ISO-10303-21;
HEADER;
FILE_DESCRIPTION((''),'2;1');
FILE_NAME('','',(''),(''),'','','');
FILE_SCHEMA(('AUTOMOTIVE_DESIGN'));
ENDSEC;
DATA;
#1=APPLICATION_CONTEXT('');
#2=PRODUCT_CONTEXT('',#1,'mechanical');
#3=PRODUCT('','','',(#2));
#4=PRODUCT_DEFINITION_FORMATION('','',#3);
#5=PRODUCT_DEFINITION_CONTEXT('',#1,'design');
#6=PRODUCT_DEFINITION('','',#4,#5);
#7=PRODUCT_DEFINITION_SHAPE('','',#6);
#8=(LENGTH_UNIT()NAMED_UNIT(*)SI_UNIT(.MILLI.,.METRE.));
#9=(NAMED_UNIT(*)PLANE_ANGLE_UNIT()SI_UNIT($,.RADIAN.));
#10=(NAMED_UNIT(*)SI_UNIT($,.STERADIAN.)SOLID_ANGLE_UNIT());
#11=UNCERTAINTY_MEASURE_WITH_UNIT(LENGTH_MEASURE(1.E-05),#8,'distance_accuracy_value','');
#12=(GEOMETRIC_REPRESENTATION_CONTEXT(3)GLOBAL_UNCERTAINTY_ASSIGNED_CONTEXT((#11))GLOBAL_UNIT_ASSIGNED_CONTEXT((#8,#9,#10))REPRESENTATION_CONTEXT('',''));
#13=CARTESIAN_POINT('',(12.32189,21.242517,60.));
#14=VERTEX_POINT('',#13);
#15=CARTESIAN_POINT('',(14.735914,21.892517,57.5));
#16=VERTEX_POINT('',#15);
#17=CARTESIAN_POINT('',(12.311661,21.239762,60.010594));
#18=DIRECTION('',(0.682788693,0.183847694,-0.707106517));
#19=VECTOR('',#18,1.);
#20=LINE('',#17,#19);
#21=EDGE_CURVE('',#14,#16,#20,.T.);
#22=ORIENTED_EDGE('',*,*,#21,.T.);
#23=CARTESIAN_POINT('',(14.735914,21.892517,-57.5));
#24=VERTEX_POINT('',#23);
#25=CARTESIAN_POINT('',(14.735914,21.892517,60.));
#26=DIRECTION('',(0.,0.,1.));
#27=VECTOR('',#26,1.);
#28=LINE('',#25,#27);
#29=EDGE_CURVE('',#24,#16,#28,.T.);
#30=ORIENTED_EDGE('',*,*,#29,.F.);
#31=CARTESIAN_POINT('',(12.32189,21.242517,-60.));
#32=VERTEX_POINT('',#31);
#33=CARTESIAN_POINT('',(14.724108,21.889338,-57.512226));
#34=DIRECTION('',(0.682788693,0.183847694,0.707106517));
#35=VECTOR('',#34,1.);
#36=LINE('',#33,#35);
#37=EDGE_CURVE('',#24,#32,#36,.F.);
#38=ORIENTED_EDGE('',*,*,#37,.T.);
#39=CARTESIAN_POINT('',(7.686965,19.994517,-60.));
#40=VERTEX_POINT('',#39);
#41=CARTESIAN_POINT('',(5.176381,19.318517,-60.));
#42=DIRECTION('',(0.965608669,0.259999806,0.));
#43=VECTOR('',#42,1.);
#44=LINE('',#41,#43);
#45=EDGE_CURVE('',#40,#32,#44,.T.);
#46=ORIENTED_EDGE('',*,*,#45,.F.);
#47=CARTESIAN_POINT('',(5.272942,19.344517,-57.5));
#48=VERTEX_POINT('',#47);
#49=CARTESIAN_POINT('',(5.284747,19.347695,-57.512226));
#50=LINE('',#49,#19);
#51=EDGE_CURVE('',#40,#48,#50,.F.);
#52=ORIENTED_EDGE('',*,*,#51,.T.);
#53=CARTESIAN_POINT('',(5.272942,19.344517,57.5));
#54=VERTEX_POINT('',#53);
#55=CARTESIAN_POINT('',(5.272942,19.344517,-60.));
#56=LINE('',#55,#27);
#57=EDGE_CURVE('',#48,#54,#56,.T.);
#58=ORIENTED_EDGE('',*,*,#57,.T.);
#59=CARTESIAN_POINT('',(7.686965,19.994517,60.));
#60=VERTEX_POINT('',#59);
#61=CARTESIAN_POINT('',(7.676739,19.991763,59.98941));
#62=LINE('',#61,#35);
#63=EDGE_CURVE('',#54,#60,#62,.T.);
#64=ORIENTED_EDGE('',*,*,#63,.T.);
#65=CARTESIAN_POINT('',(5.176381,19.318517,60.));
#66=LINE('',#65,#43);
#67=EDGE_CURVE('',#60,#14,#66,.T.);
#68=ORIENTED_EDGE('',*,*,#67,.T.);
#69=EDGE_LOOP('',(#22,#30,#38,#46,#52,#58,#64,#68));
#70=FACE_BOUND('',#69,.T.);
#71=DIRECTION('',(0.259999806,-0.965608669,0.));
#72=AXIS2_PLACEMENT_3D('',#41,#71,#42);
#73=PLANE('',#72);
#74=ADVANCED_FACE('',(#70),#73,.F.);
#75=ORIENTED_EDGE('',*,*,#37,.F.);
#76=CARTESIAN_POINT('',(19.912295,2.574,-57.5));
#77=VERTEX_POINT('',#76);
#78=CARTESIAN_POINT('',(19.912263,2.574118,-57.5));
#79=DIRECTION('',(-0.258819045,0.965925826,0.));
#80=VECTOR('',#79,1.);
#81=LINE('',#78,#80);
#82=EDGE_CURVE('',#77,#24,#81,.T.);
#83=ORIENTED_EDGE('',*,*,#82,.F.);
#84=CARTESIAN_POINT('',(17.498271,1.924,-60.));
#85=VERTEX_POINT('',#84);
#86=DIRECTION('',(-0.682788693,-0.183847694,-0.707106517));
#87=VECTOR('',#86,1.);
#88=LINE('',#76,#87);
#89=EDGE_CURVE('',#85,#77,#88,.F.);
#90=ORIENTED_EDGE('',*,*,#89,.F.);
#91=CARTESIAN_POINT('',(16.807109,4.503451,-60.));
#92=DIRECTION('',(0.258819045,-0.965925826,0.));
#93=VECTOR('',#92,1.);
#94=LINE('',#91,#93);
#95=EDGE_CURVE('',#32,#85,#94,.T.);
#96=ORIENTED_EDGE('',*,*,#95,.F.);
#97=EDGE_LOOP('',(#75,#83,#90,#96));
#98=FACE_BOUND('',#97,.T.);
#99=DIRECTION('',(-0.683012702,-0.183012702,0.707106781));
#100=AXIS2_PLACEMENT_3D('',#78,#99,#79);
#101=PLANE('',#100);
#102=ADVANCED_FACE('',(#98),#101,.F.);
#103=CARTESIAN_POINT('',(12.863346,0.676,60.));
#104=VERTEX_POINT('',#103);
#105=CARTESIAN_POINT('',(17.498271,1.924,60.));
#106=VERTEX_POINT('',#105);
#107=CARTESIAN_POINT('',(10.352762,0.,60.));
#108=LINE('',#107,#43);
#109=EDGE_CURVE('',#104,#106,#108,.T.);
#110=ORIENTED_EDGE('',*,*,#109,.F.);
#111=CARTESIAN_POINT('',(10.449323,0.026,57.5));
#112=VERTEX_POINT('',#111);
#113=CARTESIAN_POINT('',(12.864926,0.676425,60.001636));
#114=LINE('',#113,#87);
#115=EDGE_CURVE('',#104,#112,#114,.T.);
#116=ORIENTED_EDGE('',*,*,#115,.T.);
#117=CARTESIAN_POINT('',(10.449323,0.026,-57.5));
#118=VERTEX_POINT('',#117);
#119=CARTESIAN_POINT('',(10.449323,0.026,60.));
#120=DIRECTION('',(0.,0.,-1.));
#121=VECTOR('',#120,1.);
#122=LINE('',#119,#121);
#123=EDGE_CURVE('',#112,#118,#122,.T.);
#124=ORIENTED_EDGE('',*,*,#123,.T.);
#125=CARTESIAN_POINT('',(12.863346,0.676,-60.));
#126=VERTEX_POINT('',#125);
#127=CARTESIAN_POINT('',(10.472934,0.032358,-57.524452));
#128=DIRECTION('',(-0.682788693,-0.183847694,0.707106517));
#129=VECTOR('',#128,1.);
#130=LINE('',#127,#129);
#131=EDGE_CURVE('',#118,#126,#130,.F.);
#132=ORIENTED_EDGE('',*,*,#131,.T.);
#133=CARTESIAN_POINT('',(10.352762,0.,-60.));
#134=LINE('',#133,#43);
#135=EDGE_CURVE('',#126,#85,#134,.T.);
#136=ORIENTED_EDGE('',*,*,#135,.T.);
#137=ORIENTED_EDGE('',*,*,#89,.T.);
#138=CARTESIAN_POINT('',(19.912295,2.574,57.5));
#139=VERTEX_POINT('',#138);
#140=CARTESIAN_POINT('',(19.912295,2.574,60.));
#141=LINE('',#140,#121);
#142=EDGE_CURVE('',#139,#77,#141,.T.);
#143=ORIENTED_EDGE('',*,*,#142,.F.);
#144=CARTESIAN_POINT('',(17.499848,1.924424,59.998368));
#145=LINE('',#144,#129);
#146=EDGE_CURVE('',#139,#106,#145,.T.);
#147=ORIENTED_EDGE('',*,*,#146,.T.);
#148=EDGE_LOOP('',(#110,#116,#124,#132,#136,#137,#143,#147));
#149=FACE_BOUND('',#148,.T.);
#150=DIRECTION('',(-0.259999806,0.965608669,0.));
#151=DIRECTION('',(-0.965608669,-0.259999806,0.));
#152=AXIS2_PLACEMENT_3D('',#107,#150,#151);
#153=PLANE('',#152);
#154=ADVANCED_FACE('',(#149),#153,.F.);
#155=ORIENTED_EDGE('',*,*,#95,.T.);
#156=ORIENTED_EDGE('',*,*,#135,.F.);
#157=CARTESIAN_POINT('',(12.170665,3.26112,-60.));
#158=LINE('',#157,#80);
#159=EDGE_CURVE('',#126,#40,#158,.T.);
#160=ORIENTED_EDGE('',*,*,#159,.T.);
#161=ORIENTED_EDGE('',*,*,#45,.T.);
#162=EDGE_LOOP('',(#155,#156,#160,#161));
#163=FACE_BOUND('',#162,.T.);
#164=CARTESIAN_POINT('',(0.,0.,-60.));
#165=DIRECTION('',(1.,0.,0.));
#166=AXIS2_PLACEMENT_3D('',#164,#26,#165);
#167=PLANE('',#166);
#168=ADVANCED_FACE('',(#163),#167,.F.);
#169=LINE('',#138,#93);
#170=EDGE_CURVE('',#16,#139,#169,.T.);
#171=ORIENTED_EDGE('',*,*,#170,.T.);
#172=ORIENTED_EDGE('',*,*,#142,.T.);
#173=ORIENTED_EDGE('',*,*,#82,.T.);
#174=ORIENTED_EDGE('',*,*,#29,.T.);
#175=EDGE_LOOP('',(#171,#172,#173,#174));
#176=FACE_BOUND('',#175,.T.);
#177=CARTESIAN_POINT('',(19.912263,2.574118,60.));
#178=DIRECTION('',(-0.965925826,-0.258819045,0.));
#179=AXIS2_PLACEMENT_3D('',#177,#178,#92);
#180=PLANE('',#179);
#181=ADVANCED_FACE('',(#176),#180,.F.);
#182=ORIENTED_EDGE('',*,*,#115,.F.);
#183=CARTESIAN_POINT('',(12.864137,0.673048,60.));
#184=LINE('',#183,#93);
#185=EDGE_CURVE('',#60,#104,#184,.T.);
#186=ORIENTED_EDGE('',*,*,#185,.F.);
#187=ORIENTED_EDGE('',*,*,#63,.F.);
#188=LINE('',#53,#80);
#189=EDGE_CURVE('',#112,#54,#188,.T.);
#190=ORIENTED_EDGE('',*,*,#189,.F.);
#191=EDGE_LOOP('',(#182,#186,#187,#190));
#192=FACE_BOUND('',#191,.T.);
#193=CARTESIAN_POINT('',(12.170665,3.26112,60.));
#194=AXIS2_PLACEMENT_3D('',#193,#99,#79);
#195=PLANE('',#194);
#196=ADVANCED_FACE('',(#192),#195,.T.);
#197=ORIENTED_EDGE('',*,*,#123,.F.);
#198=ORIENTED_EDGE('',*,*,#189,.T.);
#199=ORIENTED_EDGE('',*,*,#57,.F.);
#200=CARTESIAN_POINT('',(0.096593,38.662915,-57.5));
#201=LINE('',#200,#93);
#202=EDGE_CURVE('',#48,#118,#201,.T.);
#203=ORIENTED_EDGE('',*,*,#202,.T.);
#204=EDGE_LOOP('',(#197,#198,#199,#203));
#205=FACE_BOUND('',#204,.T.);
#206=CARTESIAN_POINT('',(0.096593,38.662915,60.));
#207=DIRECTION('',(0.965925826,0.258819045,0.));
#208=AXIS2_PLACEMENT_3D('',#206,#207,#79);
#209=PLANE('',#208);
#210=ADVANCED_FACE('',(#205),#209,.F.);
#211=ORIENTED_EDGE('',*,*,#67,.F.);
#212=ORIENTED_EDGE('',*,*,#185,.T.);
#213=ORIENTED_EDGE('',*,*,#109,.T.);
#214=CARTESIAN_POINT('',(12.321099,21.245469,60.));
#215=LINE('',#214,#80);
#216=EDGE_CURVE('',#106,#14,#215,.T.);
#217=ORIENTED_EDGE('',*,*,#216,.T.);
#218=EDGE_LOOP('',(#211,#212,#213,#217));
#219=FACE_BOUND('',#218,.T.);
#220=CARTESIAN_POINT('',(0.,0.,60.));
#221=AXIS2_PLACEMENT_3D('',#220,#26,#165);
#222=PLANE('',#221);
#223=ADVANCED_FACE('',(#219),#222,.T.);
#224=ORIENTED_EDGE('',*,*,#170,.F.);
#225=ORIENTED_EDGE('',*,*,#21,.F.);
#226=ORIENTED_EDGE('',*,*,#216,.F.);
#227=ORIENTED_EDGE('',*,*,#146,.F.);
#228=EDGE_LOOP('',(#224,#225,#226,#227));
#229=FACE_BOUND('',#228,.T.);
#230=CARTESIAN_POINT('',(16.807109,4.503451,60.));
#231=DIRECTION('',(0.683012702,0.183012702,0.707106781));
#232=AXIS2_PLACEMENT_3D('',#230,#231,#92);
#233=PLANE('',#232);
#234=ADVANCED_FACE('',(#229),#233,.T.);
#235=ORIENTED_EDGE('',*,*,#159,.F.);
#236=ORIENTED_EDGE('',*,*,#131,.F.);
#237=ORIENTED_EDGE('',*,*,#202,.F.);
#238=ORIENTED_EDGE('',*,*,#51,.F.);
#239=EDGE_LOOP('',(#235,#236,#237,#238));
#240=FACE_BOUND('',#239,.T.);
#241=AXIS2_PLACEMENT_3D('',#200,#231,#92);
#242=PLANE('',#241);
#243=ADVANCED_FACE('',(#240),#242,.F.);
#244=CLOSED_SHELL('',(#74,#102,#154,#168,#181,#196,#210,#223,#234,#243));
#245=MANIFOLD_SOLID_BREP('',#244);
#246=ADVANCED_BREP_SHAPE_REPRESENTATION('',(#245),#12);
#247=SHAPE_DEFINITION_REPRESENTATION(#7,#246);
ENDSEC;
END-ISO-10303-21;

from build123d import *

# Parameters (mm, degrees)
BOSS_EXTRUDE1_DEPTH    = 60
CUT_EXTRUDE1_DEPTH     = 128.644720336
MOVE_START             = 10
MOVE_FACE1_OUTLINE_W   = 23
MOVE_FACE1_OUTLINE_H   = 122
MOVE_FACE1_DEPTH       = 0.1
MOVE_START_2           = 19.9
MOVE_FACE1_2_OUTLINE_W = 23
MOVE_FACE1_2_OUTLINE_H = 122
MOVE_FACE1_2_DEPTH     = 0.1
CHAMFER1_SIZE          = 2.5


# Read off the part's stored shape, not the designer's step: Move Face1
with BuildPart() as part:
    # Sketch1 → Boss-Extrude1 (new, symmetric)
    with BuildSketch(Plane.XY):
        Polygon((0, 38.637033052), (10.352761804, 0), (20.008855708, 2.6), (10.352761804, 38.637033052), align=None)
    extrude(amount=BOSS_EXTRUDE1_DEPTH, both=True)

    # Sketch2 → Cut-Extrude1 (cut, through all)
    with BuildSketch(Plane.XY.offset(60)):
        Polygon((5.176380902, 19.318516526), (14.832474806, 21.918516526), (10.352761804, 38.637033052), (0, 38.637033052), align=None)
    extrude(amount=-CUT_EXTRUDE1_DEPTH, mode=Mode.SUBTRACT)

    # Move Face1 outline → Move Face1 (cut)
    with BuildSketch(Plane(origin=(0, 0, 0), x_dir=(-0.258819045102515, 0.9659258262890698, 0), z_dir=(0.9659258262890699, 0.258819045102515, 0)).offset(MOVE_START)):
        with Locations((7.5, 0)):
            Rectangle(MOVE_FACE1_OUTLINE_W, MOVE_FACE1_OUTLINE_H)
    extrude(amount=MOVE_FACE1_DEPTH, mode=Mode.SUBTRACT)

    # Move Face1 2 outline → Move Face1 2 (cut)
    with BuildSketch(Plane(origin=(0, 0, 0), x_dir=(-0.258819045102515, 0.9659258262890698, 0), z_dir=(0.9659258262890699, 0.258819045102515, 0)).offset(MOVE_START_2)):
        with Locations((7.5, 0)):
            Rectangle(MOVE_FACE1_2_OUTLINE_W, MOVE_FACE1_2_OUTLINE_H)
    extrude(amount=MOVE_FACE1_2_DEPTH, mode=Mode.SUBTRACT)

    # Chamfer1
    chamfer1_edges = [part.edges().sort_by_distance(p)[0] for p in [
        (7.861132292, 9.685258263, -60),
        (7.861132292, 9.685258263, 60),
        (17.324104318, 12.233258263, -60),
        (17.324104318, 12.233258263, 60),
    ]]
    chamfer(chamfer1_edges, length=CHAMFER1_SIZE)


solid = part.part
